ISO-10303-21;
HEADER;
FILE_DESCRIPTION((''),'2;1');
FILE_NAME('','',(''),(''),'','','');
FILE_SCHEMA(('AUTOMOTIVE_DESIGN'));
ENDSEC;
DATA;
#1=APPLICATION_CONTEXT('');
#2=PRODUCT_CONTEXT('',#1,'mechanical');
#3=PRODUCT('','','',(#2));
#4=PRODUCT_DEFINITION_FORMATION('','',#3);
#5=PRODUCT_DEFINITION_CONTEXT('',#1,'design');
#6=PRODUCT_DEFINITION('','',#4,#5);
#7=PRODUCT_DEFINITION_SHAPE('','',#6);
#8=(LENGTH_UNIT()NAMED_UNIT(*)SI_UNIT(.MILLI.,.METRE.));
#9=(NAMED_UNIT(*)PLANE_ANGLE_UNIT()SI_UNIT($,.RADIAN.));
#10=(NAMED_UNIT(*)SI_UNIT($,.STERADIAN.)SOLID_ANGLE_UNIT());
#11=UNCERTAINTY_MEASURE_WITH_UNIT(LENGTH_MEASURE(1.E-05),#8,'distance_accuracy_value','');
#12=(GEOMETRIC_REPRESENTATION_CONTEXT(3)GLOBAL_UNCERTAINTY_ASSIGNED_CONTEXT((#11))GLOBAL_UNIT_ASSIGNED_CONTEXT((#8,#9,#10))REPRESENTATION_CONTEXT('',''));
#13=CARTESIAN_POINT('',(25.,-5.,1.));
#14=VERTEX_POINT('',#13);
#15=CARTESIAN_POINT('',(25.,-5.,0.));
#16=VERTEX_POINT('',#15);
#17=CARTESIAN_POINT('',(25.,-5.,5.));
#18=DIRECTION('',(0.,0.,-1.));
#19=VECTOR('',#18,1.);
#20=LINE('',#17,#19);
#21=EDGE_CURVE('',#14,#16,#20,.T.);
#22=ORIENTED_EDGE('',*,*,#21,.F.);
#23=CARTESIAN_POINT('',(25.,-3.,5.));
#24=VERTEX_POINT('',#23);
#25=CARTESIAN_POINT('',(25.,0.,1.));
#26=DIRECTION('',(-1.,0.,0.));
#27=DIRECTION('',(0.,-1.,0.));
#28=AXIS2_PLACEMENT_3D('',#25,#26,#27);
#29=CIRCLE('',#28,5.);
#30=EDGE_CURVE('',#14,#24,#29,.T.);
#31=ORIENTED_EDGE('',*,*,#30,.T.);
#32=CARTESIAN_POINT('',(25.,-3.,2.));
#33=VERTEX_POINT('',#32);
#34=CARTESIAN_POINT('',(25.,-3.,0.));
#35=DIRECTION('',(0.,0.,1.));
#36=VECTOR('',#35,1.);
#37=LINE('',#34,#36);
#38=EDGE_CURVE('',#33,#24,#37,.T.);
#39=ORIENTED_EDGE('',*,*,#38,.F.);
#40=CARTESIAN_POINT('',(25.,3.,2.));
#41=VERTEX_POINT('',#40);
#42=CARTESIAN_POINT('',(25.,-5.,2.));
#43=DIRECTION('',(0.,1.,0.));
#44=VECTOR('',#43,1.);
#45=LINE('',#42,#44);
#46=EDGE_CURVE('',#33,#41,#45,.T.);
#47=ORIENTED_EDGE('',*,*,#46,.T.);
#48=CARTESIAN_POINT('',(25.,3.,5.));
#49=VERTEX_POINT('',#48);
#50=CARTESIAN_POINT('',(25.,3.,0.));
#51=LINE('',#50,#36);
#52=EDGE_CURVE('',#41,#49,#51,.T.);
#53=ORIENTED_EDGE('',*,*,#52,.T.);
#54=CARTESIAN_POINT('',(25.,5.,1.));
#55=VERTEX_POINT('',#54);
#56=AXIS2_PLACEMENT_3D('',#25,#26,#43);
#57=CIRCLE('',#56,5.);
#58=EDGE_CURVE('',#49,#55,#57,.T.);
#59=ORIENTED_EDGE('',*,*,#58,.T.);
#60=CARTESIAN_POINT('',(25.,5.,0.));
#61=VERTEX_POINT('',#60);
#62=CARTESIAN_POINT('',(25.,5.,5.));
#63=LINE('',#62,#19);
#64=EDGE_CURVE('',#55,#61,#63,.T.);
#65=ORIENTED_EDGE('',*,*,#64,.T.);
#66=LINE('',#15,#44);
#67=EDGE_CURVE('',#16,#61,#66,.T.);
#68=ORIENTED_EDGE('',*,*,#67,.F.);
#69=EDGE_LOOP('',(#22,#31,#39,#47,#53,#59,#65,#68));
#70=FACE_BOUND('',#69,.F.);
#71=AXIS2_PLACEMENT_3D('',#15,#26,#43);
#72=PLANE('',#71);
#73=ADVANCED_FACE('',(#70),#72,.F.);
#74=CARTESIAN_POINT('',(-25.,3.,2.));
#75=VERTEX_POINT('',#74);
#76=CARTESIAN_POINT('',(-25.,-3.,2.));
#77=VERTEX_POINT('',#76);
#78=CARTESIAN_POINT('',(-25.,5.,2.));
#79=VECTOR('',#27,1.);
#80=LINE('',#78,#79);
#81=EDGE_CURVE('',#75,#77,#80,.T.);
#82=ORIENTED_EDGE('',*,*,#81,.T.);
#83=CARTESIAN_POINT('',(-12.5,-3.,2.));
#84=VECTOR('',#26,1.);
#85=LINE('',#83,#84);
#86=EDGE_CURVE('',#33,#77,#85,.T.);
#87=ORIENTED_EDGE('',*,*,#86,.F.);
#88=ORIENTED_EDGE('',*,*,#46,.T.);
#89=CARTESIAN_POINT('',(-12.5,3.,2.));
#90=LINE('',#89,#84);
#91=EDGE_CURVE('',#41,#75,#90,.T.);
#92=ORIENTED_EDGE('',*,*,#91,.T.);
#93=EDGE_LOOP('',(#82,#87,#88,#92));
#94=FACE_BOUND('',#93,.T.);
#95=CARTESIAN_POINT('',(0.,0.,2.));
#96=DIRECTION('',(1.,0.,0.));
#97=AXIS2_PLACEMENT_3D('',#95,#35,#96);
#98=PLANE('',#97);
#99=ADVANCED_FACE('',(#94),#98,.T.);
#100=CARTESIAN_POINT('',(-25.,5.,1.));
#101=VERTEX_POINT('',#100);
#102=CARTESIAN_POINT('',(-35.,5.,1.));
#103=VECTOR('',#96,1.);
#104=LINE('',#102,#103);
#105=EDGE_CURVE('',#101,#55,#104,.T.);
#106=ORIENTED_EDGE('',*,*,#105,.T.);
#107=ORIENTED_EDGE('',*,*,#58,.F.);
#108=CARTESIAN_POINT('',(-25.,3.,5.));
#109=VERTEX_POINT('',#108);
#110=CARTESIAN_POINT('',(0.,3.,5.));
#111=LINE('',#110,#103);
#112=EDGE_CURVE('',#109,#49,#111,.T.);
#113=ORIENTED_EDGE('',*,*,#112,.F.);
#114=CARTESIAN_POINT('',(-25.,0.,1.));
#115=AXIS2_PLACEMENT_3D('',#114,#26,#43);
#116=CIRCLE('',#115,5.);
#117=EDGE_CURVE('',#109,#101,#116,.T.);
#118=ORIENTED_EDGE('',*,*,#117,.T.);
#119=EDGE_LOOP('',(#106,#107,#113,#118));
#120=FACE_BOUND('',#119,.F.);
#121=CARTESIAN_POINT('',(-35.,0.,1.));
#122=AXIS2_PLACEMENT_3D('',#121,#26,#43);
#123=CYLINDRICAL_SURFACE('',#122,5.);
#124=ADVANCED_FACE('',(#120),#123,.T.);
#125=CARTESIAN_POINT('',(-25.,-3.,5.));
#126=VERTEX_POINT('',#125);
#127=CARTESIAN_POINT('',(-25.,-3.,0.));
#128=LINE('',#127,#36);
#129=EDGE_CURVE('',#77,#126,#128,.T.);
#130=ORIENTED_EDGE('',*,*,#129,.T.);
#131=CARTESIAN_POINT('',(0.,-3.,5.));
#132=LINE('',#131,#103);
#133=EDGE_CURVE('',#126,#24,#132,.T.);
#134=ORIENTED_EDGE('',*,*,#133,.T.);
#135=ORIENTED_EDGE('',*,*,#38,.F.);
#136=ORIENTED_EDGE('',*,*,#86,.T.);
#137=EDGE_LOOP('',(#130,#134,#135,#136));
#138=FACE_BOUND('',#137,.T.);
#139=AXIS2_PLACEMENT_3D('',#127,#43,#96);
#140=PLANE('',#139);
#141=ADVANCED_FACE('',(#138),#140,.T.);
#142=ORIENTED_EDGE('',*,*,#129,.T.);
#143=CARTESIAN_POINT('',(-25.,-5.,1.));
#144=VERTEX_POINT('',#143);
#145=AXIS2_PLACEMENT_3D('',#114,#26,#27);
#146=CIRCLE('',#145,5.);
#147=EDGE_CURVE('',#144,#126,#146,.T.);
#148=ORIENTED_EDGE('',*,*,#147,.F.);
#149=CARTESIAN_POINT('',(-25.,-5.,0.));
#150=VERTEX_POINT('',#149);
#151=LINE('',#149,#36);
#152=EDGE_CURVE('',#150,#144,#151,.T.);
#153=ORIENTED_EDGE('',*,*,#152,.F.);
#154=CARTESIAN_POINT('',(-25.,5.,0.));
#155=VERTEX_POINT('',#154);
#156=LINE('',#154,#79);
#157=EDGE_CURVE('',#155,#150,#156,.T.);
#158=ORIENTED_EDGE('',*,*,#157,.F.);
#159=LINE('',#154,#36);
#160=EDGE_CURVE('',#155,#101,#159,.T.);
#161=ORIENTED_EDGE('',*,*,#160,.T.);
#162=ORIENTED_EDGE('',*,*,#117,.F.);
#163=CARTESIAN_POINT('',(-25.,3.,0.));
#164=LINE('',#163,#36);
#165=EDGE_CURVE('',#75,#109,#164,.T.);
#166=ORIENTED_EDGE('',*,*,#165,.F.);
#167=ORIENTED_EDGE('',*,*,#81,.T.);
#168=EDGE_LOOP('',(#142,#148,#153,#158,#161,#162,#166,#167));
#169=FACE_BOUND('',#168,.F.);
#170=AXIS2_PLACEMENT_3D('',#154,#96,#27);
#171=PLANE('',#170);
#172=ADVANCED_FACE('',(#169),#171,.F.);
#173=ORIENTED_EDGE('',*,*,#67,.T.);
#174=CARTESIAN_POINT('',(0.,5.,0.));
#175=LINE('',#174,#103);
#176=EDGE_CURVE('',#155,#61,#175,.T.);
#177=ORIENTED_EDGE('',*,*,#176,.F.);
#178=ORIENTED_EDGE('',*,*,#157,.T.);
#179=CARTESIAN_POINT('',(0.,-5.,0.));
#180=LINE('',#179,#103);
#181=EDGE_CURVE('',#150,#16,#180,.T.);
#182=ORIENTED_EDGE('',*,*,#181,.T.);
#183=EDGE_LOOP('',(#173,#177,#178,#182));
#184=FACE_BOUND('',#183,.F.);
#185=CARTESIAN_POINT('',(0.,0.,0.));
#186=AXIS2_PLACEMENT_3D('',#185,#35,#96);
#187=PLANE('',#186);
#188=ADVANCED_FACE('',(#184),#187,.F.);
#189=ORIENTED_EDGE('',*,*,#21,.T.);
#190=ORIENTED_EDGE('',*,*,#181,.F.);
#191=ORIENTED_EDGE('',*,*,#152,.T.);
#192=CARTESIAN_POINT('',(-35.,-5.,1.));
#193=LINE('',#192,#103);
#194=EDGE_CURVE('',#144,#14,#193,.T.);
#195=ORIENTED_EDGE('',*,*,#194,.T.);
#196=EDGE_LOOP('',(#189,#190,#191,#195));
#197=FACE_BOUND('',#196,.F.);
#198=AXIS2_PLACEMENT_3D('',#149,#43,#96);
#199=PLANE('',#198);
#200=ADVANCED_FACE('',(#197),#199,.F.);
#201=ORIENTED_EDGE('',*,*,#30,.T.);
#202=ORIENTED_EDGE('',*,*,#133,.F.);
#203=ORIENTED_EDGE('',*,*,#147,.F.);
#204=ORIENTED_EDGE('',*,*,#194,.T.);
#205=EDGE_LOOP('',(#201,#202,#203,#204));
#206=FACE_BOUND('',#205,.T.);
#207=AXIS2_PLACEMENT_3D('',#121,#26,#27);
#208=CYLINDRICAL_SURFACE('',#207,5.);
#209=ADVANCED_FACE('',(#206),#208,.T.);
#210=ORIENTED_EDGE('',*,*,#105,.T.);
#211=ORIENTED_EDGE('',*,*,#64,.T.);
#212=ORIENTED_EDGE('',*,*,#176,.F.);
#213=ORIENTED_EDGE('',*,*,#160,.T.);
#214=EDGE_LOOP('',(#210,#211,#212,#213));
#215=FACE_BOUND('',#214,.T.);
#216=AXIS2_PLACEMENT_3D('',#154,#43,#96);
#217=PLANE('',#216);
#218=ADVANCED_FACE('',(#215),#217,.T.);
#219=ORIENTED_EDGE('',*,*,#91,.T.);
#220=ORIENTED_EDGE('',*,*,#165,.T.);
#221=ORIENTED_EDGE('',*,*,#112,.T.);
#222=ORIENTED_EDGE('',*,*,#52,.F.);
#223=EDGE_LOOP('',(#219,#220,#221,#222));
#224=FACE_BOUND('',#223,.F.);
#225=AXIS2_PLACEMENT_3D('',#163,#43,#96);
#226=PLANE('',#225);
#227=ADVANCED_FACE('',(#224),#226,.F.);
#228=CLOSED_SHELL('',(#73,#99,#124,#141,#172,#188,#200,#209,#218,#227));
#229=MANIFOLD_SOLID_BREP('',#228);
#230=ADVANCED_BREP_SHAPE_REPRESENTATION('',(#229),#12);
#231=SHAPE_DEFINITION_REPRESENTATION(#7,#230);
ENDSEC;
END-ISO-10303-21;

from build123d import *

# Parameters (mm, degrees)
F0_W        = 50
F0_H        = 6
F0_H_2      = 2
F1_DEPTH    = 2
F2_DEPTH    = 5
F3_T1_DEPTH = 70


# Not quite as in the source:
# - a fillet or chamfer that OpenCascade refuses, or shapes differently, is made with other operations: its cross-section is extruded or revolved along the edge and cut away or added
# - a feature names something its author has since deleted; it is built from what else it names


with BuildPart() as f1:
    # F0 (on Top) → F1 (new body)
    with BuildSketch(Plane.XY):
        Rectangle(F0_W, F0_H)
        with Locations((0, 4)):
            Rectangle(F0_W, F0_H_2)
        with Locations((0, -4)):
            Rectangle(F0_W, F0_H_2)
    extrude(amount=F1_DEPTH)

    # F0 (on Top) → F2 (join)
    with BuildSketch(Plane.XY):
        with Locations((0, 4)):
            Rectangle(F0_W, F0_H_2)
        with Locations((0, -4)):
            Rectangle(F0_W, F0_H_2)
    extrude(amount=F2_DEPTH)

    # F3: fillet of radius 5 on 2 edges, made by hand

    # F3_s2 → F3_t1 (cut)
    with BuildSketch(Plane.YZ.offset(-35)):
        with BuildLine():
            ThreePointArc((-5, 1), (-4.472135955, 3.2360679775), (-3, 5))
            Line((-3, 5), (-5, 5))
            Line((-5, 5), (-5, 1))
        make_face()
        with BuildLine():
            ThreePointArc((5, 1), (4.472135955, 3.2360679775), (3, 5))
            Line((3, 5), (5, 5))
            Line((5, 5), (5, 1))
        make_face()
    extrude(amount=F3_T1_DEPTH, mode=Mode.SUBTRACT)


solid = f1.part
